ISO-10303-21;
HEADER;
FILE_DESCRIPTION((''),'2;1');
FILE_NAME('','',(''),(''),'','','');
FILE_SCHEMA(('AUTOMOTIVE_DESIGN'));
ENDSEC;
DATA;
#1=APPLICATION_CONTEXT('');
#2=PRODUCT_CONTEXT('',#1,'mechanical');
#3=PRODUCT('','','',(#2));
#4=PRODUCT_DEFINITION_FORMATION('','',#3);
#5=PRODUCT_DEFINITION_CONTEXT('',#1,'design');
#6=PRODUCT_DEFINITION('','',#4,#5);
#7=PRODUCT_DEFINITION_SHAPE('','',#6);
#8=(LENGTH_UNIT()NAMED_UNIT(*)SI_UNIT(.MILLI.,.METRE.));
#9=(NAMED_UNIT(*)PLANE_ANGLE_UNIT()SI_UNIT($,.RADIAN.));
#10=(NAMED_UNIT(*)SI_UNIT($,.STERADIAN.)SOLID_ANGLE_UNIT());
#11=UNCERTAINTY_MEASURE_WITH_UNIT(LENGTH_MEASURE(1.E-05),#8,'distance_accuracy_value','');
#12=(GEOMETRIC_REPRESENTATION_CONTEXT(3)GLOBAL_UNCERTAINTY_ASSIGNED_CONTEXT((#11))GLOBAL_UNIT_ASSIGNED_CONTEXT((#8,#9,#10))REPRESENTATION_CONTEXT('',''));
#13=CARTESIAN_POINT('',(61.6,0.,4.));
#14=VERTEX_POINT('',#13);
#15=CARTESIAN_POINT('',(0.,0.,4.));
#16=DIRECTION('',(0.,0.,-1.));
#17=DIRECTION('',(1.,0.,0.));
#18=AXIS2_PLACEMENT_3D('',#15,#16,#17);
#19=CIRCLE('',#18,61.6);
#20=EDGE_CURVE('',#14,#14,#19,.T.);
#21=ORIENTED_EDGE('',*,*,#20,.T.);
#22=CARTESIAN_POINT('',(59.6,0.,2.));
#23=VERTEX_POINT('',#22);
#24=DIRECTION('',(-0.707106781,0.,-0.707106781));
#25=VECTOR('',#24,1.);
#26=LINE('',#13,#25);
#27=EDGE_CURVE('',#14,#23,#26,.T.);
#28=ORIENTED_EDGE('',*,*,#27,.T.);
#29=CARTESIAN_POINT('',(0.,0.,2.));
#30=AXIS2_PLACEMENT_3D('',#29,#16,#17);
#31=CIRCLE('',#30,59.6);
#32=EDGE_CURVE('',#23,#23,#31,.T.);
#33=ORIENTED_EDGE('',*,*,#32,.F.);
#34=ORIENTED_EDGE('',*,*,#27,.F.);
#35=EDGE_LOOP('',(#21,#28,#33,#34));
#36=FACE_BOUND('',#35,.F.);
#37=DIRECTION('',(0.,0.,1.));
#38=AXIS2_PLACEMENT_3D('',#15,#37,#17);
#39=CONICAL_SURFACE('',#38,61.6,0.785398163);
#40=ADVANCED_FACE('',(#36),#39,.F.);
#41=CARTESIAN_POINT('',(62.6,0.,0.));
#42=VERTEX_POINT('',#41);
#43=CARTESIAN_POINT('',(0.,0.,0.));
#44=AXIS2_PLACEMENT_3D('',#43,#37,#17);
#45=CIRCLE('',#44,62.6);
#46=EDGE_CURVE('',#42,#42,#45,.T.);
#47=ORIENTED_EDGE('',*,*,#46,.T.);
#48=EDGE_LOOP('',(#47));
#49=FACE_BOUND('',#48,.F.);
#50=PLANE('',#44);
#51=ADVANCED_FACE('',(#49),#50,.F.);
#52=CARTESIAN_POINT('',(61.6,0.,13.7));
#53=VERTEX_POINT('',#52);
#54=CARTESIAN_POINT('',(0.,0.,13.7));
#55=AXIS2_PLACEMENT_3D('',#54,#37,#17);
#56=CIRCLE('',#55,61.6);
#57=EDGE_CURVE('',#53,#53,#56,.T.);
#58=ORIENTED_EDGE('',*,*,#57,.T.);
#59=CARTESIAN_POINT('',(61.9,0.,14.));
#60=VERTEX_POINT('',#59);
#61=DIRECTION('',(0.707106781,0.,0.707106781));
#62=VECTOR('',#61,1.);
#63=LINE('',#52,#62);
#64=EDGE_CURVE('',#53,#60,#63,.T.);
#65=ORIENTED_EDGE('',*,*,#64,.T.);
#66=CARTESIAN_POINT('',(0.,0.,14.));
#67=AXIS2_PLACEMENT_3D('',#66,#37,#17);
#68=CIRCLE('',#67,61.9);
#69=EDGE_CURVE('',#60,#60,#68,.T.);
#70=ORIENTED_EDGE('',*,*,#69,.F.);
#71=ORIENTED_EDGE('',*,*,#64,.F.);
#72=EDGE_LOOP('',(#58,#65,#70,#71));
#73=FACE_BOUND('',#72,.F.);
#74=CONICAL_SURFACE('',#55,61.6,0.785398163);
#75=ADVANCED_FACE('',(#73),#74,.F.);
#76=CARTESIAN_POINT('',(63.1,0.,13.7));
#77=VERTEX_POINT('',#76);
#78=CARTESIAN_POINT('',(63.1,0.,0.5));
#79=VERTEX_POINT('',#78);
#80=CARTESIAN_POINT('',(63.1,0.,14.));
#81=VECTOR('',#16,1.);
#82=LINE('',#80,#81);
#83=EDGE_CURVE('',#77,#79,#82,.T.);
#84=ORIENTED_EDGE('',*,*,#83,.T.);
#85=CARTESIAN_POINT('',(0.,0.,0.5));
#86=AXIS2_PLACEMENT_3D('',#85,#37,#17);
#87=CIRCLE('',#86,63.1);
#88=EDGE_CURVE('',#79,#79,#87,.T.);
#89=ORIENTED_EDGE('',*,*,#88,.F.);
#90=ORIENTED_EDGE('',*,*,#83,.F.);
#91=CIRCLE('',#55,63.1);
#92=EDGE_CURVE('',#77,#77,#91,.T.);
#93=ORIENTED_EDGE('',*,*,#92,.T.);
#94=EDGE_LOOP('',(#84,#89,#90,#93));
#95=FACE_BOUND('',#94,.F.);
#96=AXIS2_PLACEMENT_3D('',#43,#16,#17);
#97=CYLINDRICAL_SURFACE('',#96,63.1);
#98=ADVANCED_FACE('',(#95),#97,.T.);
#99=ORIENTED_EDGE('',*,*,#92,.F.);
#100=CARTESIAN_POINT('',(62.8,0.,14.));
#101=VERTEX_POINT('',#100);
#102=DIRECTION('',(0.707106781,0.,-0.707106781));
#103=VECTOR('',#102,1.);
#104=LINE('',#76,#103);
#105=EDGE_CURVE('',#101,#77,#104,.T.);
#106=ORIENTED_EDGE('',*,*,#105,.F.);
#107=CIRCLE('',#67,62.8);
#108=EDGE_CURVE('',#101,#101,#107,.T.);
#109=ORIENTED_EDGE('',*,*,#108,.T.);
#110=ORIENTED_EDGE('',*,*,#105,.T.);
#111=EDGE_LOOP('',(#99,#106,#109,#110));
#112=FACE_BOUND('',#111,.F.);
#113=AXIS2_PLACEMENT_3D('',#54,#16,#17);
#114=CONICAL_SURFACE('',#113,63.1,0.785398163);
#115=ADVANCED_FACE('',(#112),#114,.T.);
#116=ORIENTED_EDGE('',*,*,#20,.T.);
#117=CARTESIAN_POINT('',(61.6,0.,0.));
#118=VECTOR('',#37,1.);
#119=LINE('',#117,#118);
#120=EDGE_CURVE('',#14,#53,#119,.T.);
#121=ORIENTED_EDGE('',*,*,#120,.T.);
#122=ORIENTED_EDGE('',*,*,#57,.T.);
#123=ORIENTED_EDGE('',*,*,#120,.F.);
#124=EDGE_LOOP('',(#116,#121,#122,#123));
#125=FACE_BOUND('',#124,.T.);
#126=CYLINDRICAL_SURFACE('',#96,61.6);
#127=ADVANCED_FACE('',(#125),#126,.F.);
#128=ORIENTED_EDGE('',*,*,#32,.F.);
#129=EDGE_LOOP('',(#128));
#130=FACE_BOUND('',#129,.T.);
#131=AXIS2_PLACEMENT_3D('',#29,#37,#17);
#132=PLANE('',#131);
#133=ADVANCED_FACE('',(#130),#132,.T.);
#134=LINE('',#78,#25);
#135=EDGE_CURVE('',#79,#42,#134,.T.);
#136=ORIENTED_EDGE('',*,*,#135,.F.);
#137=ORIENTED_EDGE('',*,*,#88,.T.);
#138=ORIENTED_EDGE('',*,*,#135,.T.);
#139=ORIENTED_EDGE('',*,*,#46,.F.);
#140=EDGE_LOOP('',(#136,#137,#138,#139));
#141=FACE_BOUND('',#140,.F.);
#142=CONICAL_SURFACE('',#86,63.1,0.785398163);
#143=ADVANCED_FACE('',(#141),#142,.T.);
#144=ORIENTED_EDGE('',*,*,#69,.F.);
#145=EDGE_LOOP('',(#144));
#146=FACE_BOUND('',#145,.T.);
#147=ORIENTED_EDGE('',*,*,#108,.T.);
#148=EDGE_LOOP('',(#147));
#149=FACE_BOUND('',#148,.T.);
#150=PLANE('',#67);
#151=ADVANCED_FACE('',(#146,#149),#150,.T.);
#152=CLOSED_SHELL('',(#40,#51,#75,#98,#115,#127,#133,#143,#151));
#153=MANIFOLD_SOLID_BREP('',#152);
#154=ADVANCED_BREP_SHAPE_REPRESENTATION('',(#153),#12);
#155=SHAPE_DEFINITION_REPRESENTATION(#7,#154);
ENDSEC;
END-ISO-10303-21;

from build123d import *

# Parameters (mm, degrees)
F0_R     = 63.1
F0_R_2   = 61.6
F1_DEPTH = 2
F2_DEPTH = 14
F3_SIZE  = 0.5
F4_SIZE  = 2
F5_SIZE  = 0.3


# Not quite as in the source:
# - a feature names something its author has since deleted; it is built from what else it names


with BuildPart() as f1:
    # F0 (on Top) → F1 (new body)
    with BuildSketch(Plane.XY):
        Circle(F0_R)
        Circle(F0_R_2, mode=Mode.SUBTRACT)
        Circle(F0_R_2)
    extrude(amount=F1_DEPTH)

    # F0 (on Top) → F2 (join)
    with BuildSketch(Plane.XY):
        Circle(F0_R)
        Circle(F0_R_2, mode=Mode.SUBTRACT)
    extrude(amount=F2_DEPTH)

    # F3
    f3_edges = [f1.edges().sort_by_distance(p)[0] for p in [
        (-63.1, 0, 0),
    ]]
    chamfer(f3_edges, length=F3_SIZE)

    # F4
    f4_edges = [f1.edges().sort_by_distance(p)[0] for p in [
        (-61.6, 0, 2),
    ]]
    chamfer(f4_edges, length=F4_SIZE)

    # F5
    f5_edges = [f1.edges().sort_by_distance(p)[0] for p in [
        (-63.1, 0, 14),
        (-61.6, 0, 14),
    ]]
    chamfer(f5_edges, length=F5_SIZE)


solid = f1.part
